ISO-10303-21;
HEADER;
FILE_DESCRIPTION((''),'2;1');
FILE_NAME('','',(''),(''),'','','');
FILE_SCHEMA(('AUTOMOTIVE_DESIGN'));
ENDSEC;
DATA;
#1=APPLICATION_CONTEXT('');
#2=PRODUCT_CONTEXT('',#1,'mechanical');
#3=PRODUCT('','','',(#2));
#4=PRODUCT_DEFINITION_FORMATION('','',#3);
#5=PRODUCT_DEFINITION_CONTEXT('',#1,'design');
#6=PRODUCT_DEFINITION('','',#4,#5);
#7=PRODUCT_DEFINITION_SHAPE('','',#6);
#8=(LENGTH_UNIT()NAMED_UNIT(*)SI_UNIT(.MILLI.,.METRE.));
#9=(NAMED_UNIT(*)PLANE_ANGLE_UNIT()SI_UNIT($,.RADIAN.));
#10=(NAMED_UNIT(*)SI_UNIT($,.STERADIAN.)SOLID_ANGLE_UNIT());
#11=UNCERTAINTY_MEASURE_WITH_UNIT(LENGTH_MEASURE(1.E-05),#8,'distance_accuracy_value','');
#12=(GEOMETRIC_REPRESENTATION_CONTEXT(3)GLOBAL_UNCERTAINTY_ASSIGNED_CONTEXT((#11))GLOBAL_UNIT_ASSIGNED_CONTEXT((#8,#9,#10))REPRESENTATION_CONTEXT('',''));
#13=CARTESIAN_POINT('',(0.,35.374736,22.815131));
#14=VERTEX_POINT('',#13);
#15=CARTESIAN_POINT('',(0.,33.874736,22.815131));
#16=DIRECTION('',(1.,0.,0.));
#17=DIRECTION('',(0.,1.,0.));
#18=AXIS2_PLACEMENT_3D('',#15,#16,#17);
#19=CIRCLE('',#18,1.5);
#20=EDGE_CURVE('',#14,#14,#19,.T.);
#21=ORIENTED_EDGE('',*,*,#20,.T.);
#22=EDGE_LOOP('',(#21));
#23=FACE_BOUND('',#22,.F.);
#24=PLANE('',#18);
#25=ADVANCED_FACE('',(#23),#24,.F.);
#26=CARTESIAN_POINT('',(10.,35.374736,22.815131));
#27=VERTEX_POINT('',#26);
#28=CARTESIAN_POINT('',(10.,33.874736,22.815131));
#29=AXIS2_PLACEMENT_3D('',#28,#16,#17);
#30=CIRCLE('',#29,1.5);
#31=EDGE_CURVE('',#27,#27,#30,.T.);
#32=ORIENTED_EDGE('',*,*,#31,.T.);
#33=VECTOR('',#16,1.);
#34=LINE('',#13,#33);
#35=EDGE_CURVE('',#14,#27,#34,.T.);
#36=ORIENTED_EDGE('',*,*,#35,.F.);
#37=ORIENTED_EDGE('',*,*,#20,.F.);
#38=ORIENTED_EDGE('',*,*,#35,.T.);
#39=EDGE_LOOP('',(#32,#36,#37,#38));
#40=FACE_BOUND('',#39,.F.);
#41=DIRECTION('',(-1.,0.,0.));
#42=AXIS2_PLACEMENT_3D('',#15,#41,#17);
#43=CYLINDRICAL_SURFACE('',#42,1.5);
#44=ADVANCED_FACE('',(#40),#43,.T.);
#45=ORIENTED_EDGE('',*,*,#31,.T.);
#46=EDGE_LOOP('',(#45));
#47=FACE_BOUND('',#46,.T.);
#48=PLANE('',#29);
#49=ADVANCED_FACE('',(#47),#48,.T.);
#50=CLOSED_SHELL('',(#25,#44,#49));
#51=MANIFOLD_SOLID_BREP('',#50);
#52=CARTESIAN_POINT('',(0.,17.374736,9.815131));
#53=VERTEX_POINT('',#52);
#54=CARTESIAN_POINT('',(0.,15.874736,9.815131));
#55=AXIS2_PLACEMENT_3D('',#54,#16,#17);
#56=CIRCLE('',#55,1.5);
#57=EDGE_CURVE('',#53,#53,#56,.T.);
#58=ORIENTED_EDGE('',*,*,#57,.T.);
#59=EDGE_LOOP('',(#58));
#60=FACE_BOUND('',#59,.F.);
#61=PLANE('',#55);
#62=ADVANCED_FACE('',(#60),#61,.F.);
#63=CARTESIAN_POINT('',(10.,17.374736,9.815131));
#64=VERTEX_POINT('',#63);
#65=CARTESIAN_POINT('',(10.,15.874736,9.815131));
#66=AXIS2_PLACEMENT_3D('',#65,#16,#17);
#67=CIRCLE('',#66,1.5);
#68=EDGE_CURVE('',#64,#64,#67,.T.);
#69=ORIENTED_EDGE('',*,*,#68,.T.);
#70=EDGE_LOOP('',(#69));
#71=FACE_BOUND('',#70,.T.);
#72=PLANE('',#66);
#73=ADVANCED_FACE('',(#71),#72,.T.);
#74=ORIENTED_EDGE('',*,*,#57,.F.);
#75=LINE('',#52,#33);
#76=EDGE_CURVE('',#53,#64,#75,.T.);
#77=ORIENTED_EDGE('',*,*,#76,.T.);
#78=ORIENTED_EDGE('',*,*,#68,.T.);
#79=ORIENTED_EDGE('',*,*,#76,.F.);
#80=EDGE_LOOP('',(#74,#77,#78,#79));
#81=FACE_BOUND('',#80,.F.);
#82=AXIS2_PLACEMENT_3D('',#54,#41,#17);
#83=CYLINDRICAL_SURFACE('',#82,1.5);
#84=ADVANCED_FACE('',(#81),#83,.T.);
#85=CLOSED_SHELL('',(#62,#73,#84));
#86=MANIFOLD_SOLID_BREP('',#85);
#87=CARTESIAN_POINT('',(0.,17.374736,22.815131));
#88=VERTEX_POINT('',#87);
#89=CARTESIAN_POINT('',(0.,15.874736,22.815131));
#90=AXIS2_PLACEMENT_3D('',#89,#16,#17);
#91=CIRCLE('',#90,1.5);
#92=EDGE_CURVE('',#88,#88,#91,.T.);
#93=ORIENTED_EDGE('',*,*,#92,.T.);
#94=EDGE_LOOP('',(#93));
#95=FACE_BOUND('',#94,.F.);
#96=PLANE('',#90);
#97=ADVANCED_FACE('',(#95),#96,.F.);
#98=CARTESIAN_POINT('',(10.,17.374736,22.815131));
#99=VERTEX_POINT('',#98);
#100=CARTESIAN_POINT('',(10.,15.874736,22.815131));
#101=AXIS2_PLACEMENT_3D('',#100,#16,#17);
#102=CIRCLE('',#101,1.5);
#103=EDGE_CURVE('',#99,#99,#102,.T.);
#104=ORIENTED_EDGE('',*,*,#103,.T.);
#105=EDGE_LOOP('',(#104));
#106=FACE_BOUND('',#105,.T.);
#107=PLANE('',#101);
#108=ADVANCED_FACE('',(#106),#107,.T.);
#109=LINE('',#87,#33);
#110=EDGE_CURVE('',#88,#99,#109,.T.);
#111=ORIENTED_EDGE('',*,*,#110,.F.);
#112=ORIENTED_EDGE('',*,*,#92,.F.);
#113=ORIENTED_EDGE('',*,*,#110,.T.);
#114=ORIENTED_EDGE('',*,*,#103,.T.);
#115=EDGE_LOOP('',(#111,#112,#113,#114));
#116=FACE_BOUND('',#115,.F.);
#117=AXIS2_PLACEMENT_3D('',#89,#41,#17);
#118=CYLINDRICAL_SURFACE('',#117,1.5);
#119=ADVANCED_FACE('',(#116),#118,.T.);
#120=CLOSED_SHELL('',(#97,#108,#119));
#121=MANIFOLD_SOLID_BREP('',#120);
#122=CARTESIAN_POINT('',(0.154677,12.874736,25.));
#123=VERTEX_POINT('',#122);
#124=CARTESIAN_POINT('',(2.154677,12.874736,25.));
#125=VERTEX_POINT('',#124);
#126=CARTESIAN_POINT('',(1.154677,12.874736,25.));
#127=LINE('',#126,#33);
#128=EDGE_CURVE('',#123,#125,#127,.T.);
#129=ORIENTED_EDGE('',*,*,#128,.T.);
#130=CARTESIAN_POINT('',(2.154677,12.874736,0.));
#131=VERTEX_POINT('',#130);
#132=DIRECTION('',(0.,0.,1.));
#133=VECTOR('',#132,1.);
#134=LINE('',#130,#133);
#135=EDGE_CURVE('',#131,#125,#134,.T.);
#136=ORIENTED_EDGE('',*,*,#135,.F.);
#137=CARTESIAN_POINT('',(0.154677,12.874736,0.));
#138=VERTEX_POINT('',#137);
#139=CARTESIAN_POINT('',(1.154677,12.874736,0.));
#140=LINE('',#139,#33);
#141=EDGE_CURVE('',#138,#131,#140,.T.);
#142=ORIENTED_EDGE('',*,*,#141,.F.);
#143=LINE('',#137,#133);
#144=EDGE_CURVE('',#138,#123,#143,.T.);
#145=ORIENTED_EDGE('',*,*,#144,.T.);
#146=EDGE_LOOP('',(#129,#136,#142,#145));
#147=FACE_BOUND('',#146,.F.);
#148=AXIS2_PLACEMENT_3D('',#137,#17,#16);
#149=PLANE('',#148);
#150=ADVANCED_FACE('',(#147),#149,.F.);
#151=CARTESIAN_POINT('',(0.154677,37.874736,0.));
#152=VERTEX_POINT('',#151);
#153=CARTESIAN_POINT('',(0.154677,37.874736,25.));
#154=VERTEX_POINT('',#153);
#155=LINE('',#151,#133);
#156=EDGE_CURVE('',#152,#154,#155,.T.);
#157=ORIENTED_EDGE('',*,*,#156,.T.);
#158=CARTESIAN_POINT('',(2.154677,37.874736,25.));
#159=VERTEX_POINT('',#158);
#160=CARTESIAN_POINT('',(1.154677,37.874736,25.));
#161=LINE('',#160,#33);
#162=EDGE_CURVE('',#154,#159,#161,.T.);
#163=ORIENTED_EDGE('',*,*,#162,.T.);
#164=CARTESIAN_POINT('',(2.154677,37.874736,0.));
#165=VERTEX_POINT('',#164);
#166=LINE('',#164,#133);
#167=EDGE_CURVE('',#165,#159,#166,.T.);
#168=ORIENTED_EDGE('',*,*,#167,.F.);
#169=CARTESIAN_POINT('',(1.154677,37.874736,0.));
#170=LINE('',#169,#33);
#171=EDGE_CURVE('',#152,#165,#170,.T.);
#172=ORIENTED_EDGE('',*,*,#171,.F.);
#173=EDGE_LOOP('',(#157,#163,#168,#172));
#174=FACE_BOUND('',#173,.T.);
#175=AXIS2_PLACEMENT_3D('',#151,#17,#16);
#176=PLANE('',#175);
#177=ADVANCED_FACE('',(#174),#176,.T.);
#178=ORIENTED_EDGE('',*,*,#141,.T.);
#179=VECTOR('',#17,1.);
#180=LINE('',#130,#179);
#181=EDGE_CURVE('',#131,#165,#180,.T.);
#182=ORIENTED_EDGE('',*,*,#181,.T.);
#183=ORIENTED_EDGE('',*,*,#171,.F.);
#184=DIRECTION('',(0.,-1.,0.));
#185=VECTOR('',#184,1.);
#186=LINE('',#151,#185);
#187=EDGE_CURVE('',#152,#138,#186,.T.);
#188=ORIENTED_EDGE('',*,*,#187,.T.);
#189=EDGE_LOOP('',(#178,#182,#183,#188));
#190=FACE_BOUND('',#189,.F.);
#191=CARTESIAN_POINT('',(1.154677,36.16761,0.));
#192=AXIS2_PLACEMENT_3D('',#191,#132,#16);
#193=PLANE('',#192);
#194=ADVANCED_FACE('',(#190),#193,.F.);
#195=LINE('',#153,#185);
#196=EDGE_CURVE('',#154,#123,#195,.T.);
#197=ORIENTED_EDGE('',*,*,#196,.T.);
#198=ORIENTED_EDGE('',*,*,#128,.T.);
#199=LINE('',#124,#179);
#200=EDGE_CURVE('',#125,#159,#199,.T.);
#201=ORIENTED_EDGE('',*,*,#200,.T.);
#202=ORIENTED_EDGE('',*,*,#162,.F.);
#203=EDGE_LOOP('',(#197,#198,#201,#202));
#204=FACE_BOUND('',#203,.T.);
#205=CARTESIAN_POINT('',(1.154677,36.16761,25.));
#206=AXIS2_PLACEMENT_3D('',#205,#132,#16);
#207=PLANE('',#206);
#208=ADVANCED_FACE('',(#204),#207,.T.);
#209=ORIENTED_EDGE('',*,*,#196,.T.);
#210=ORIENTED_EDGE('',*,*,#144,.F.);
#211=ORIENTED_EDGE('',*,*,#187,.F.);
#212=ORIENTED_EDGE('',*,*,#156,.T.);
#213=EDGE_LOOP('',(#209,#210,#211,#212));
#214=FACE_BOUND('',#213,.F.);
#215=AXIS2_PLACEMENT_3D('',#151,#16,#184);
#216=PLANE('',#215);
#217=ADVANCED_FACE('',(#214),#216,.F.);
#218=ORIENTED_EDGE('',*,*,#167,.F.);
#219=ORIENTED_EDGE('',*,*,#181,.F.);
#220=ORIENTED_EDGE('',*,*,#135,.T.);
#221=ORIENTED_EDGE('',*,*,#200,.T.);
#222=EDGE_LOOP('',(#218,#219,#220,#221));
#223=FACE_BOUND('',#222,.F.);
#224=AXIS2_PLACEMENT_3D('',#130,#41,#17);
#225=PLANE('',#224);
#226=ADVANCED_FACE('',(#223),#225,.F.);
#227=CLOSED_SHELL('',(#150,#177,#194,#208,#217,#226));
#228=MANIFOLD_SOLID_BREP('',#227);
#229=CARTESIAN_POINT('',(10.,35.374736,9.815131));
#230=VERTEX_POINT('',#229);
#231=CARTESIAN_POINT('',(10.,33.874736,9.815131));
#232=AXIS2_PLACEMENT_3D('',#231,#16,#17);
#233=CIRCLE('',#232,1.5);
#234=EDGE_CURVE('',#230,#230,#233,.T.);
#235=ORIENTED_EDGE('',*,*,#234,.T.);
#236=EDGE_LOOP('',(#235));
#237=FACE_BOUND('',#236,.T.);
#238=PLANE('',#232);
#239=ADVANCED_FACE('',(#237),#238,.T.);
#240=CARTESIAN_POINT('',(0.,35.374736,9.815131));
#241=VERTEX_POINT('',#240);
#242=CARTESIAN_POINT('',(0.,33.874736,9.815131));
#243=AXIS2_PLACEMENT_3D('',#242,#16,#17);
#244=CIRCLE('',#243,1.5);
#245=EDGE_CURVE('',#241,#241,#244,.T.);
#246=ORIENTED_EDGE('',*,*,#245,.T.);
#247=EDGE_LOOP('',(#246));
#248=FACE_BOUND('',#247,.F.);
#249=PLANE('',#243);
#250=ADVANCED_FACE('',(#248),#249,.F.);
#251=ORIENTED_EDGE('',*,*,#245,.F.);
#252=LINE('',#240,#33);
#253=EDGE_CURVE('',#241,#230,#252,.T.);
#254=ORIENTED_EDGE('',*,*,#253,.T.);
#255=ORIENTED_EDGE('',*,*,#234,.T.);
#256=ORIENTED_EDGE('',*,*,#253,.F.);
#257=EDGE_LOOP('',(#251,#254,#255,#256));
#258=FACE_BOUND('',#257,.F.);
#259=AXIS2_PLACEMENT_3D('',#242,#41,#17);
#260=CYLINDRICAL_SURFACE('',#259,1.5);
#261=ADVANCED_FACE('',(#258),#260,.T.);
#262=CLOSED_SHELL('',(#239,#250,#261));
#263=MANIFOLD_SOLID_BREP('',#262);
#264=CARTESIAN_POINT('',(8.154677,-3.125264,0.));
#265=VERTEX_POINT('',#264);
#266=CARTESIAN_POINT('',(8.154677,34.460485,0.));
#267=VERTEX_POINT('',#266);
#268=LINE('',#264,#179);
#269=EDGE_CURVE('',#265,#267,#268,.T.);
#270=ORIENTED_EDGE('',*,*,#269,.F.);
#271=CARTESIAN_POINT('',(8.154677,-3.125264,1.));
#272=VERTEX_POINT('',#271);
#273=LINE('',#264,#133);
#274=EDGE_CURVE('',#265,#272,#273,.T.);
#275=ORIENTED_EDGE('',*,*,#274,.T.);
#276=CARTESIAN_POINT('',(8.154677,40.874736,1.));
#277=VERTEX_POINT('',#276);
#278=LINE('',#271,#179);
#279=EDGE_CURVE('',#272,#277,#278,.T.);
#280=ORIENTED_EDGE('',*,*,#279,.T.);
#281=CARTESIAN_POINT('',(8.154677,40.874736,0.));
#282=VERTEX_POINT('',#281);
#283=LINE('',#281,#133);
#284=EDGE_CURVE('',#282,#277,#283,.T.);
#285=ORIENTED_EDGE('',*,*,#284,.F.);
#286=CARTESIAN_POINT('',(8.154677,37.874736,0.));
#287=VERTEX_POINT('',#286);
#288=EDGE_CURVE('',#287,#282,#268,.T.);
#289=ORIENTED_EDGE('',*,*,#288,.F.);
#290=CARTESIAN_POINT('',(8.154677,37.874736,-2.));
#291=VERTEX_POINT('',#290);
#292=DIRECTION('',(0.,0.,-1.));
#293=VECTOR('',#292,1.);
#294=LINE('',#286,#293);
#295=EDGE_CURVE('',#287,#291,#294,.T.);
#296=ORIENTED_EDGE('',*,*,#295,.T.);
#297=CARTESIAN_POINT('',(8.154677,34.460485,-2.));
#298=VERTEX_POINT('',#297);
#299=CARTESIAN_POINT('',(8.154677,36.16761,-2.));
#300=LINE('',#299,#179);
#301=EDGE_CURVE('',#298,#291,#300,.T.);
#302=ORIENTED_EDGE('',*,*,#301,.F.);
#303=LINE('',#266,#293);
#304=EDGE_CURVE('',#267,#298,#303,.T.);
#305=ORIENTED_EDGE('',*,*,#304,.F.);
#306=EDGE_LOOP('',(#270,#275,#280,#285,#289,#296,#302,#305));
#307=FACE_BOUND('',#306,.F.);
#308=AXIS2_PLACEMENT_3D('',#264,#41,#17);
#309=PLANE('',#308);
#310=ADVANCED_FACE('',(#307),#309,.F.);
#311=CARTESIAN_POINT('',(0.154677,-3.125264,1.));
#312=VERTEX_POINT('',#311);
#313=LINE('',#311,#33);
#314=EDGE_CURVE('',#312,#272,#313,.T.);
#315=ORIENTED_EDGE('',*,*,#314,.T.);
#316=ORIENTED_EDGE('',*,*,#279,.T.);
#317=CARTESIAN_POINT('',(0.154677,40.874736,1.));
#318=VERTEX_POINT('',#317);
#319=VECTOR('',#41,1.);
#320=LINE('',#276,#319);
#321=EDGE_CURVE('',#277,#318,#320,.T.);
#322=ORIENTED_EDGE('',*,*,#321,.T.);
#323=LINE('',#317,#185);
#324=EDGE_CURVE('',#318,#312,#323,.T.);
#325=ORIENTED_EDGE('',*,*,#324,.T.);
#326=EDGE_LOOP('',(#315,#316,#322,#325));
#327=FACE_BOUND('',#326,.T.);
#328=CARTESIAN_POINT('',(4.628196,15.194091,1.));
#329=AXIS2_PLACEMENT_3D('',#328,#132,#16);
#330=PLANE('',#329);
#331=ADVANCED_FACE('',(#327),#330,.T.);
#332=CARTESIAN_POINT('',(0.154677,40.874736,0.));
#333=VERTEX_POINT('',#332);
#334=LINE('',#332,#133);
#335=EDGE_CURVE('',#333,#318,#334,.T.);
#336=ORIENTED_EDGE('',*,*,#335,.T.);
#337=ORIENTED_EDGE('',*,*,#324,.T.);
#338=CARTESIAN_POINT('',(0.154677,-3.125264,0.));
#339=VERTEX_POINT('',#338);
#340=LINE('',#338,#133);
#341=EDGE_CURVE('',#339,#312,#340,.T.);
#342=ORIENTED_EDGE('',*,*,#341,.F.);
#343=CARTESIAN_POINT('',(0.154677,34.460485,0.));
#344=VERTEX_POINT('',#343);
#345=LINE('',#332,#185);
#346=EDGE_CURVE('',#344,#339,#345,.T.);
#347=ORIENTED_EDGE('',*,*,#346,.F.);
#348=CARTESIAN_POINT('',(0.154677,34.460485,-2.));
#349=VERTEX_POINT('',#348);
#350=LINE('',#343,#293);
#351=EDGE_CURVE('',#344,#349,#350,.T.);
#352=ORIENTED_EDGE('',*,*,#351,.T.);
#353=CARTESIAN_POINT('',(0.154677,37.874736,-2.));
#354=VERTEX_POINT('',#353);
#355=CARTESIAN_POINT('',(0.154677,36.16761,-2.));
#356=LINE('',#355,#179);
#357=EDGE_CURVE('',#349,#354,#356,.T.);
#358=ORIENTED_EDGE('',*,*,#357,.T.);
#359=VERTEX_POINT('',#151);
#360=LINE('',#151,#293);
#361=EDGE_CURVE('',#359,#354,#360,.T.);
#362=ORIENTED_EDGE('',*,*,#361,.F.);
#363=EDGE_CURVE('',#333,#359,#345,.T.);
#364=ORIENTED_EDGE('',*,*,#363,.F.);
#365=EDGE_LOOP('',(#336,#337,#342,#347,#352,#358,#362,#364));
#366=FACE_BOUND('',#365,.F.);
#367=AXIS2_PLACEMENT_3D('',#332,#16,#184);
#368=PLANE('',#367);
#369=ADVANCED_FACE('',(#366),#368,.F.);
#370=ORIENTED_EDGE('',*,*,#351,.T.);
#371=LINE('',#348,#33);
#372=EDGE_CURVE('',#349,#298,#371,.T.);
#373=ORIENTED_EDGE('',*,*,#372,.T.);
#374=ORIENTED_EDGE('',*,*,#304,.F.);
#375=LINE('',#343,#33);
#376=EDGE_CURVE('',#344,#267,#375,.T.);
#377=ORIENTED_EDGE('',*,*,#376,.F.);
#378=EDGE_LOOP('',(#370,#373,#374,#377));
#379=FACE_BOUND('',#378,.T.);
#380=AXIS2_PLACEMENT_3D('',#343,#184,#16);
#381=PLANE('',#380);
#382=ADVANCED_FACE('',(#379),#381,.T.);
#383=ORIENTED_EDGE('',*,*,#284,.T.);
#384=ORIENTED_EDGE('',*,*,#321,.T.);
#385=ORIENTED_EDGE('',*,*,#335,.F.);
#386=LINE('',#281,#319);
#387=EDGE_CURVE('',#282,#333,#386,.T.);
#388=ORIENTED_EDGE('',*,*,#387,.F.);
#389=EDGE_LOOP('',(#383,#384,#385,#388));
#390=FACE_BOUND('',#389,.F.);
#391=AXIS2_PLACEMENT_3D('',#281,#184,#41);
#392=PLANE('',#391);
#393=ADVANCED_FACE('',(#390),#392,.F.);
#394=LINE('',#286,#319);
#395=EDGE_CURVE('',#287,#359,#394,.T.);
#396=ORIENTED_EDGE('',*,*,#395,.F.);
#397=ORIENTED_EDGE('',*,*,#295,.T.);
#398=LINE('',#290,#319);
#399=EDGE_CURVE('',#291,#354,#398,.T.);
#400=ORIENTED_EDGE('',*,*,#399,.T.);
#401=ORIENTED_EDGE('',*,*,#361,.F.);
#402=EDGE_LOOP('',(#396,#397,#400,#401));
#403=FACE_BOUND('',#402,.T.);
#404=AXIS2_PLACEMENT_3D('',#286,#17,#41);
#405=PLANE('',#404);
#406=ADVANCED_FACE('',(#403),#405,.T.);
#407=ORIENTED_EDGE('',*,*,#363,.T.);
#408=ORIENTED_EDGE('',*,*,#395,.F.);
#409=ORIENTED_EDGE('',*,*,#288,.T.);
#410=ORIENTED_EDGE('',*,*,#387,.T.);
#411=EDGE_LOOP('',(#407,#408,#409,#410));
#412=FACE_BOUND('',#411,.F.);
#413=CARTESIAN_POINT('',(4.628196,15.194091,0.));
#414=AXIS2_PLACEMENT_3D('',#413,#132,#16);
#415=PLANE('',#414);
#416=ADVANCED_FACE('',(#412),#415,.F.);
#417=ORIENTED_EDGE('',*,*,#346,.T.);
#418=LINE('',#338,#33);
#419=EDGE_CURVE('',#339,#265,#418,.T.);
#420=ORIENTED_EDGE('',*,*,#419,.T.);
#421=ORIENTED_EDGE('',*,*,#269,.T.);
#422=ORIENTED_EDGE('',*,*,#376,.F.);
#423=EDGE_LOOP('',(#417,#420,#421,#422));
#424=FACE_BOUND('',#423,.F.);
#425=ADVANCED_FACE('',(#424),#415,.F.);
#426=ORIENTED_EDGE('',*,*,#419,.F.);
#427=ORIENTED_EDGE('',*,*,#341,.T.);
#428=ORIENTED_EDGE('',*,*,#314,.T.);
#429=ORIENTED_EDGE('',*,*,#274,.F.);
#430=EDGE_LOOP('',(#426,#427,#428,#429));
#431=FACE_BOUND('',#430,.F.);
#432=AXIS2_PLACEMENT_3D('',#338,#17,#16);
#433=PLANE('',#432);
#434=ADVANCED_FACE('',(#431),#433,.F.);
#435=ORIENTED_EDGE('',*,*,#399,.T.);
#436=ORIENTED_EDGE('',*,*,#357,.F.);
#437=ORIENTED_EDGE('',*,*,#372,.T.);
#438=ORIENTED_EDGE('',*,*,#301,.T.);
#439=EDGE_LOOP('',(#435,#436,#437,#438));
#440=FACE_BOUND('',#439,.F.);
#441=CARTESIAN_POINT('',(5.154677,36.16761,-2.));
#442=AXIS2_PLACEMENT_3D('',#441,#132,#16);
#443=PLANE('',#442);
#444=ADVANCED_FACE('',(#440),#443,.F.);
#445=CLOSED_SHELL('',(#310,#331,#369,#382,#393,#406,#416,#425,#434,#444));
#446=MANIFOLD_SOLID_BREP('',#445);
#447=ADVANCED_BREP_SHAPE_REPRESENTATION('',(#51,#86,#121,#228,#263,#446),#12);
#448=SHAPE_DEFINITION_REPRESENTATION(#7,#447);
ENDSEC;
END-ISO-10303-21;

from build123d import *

# Parameters (mm, degrees)
F0_W     = 6
F0_H     = 3.4142509103
F0_W_2   = 2
F1_DEPTH = 2
F0_H_2   = 21.5857490897
F2_DEPTH = 1
F3_DEPTH = 25
F4_R     = 1.5
F5_DEPTH = 10


with BuildPart() as f1:
    # F0 (on Top) → F1 (new body)
    with BuildSketch(Plane.XY):
        with Locations((5.1546765715, 36.1676104367)):
            Rectangle(F0_W, F0_H)
        with Locations((1.1546765715, 36.1676104367)):
            Rectangle(F0_W_2, F0_H)
    extrude(amount=-F1_DEPTH)

    # F0 (on Top) → F2 (join)
    with BuildSketch(Plane.XY):
        Polygon((2.1546765715, 12.8747358918), (0.1546765715, 12.8747358918), (0.1546765715, -3.1252641082), (8.1546765715, -3.1252641082), (8.1546765715, 34.4604849815), (2.1546765715, 34.4604849815), align=None)
        with Locations((1.1546765715, 36.1676104367)):
            Rectangle(F0_W_2, F0_H)
        with Locations((5.1546765715, 36.1676104367)):
            Rectangle(F0_W, F0_H)
        Polygon((4, 40.8747358918), (0.1546765715, 40.8747358918), (0.1546765715, 37.8747358918), (2.1546765715, 37.8747358918), (8.1546765715, 37.8747358918), (8.1546765715, 40.8747358918), align=None)
        with Locations((1.1546765715, 23.6676104367)):
            Rectangle(F0_W_2, F0_H_2)
    extrude(amount=F2_DEPTH)


with BuildPart() as f3:
    # F0 (on Top) → F3 (new body)
    with BuildSketch(Plane.XY):
        with Locations((1.1546765715, 36.1676104367)):
            Rectangle(F0_W_2, F0_H)
        with Locations((1.1546765715, 23.6676104367)):
            Rectangle(F0_W_2, F0_H_2)
    extrude(amount=F3_DEPTH)


with BuildPart() as f5:
    # F4 (on Right) → F5 (new body)
    with BuildSketch(Plane.YZ):
        with Locations((15.8747358918, 9.8151313141)):
            Circle(F4_R)
    extrude(amount=F5_DEPTH)


with BuildPart() as f5b:
    # F4 (on Right) → F5, piece 2 (new body)
    with BuildSketch(Plane.YZ):
        with Locations((15.8747358918, 22.8151313141)):
            Circle(F4_R)
    extrude(amount=F5_DEPTH)


with BuildPart() as f5c:
    # F4 (on Right) → F5, piece 3 (new body)
    with BuildSketch(Plane.YZ):
        with Locations((33.8747358918, 22.8151313141)):
            Circle(F4_R)
    extrude(amount=F5_DEPTH)


with BuildPart() as f5d:
    # F4 (on Right) → F5, piece 4 (new body)
    with BuildSketch(Plane.YZ):
        with Locations((33.8747358918, 9.8151313141)):
            Circle(F4_R)
    extrude(amount=F5_DEPTH)


solid = Compound([f1.part, f3.part, f5.part, f5b.part, f5c.part, f5d.part])
